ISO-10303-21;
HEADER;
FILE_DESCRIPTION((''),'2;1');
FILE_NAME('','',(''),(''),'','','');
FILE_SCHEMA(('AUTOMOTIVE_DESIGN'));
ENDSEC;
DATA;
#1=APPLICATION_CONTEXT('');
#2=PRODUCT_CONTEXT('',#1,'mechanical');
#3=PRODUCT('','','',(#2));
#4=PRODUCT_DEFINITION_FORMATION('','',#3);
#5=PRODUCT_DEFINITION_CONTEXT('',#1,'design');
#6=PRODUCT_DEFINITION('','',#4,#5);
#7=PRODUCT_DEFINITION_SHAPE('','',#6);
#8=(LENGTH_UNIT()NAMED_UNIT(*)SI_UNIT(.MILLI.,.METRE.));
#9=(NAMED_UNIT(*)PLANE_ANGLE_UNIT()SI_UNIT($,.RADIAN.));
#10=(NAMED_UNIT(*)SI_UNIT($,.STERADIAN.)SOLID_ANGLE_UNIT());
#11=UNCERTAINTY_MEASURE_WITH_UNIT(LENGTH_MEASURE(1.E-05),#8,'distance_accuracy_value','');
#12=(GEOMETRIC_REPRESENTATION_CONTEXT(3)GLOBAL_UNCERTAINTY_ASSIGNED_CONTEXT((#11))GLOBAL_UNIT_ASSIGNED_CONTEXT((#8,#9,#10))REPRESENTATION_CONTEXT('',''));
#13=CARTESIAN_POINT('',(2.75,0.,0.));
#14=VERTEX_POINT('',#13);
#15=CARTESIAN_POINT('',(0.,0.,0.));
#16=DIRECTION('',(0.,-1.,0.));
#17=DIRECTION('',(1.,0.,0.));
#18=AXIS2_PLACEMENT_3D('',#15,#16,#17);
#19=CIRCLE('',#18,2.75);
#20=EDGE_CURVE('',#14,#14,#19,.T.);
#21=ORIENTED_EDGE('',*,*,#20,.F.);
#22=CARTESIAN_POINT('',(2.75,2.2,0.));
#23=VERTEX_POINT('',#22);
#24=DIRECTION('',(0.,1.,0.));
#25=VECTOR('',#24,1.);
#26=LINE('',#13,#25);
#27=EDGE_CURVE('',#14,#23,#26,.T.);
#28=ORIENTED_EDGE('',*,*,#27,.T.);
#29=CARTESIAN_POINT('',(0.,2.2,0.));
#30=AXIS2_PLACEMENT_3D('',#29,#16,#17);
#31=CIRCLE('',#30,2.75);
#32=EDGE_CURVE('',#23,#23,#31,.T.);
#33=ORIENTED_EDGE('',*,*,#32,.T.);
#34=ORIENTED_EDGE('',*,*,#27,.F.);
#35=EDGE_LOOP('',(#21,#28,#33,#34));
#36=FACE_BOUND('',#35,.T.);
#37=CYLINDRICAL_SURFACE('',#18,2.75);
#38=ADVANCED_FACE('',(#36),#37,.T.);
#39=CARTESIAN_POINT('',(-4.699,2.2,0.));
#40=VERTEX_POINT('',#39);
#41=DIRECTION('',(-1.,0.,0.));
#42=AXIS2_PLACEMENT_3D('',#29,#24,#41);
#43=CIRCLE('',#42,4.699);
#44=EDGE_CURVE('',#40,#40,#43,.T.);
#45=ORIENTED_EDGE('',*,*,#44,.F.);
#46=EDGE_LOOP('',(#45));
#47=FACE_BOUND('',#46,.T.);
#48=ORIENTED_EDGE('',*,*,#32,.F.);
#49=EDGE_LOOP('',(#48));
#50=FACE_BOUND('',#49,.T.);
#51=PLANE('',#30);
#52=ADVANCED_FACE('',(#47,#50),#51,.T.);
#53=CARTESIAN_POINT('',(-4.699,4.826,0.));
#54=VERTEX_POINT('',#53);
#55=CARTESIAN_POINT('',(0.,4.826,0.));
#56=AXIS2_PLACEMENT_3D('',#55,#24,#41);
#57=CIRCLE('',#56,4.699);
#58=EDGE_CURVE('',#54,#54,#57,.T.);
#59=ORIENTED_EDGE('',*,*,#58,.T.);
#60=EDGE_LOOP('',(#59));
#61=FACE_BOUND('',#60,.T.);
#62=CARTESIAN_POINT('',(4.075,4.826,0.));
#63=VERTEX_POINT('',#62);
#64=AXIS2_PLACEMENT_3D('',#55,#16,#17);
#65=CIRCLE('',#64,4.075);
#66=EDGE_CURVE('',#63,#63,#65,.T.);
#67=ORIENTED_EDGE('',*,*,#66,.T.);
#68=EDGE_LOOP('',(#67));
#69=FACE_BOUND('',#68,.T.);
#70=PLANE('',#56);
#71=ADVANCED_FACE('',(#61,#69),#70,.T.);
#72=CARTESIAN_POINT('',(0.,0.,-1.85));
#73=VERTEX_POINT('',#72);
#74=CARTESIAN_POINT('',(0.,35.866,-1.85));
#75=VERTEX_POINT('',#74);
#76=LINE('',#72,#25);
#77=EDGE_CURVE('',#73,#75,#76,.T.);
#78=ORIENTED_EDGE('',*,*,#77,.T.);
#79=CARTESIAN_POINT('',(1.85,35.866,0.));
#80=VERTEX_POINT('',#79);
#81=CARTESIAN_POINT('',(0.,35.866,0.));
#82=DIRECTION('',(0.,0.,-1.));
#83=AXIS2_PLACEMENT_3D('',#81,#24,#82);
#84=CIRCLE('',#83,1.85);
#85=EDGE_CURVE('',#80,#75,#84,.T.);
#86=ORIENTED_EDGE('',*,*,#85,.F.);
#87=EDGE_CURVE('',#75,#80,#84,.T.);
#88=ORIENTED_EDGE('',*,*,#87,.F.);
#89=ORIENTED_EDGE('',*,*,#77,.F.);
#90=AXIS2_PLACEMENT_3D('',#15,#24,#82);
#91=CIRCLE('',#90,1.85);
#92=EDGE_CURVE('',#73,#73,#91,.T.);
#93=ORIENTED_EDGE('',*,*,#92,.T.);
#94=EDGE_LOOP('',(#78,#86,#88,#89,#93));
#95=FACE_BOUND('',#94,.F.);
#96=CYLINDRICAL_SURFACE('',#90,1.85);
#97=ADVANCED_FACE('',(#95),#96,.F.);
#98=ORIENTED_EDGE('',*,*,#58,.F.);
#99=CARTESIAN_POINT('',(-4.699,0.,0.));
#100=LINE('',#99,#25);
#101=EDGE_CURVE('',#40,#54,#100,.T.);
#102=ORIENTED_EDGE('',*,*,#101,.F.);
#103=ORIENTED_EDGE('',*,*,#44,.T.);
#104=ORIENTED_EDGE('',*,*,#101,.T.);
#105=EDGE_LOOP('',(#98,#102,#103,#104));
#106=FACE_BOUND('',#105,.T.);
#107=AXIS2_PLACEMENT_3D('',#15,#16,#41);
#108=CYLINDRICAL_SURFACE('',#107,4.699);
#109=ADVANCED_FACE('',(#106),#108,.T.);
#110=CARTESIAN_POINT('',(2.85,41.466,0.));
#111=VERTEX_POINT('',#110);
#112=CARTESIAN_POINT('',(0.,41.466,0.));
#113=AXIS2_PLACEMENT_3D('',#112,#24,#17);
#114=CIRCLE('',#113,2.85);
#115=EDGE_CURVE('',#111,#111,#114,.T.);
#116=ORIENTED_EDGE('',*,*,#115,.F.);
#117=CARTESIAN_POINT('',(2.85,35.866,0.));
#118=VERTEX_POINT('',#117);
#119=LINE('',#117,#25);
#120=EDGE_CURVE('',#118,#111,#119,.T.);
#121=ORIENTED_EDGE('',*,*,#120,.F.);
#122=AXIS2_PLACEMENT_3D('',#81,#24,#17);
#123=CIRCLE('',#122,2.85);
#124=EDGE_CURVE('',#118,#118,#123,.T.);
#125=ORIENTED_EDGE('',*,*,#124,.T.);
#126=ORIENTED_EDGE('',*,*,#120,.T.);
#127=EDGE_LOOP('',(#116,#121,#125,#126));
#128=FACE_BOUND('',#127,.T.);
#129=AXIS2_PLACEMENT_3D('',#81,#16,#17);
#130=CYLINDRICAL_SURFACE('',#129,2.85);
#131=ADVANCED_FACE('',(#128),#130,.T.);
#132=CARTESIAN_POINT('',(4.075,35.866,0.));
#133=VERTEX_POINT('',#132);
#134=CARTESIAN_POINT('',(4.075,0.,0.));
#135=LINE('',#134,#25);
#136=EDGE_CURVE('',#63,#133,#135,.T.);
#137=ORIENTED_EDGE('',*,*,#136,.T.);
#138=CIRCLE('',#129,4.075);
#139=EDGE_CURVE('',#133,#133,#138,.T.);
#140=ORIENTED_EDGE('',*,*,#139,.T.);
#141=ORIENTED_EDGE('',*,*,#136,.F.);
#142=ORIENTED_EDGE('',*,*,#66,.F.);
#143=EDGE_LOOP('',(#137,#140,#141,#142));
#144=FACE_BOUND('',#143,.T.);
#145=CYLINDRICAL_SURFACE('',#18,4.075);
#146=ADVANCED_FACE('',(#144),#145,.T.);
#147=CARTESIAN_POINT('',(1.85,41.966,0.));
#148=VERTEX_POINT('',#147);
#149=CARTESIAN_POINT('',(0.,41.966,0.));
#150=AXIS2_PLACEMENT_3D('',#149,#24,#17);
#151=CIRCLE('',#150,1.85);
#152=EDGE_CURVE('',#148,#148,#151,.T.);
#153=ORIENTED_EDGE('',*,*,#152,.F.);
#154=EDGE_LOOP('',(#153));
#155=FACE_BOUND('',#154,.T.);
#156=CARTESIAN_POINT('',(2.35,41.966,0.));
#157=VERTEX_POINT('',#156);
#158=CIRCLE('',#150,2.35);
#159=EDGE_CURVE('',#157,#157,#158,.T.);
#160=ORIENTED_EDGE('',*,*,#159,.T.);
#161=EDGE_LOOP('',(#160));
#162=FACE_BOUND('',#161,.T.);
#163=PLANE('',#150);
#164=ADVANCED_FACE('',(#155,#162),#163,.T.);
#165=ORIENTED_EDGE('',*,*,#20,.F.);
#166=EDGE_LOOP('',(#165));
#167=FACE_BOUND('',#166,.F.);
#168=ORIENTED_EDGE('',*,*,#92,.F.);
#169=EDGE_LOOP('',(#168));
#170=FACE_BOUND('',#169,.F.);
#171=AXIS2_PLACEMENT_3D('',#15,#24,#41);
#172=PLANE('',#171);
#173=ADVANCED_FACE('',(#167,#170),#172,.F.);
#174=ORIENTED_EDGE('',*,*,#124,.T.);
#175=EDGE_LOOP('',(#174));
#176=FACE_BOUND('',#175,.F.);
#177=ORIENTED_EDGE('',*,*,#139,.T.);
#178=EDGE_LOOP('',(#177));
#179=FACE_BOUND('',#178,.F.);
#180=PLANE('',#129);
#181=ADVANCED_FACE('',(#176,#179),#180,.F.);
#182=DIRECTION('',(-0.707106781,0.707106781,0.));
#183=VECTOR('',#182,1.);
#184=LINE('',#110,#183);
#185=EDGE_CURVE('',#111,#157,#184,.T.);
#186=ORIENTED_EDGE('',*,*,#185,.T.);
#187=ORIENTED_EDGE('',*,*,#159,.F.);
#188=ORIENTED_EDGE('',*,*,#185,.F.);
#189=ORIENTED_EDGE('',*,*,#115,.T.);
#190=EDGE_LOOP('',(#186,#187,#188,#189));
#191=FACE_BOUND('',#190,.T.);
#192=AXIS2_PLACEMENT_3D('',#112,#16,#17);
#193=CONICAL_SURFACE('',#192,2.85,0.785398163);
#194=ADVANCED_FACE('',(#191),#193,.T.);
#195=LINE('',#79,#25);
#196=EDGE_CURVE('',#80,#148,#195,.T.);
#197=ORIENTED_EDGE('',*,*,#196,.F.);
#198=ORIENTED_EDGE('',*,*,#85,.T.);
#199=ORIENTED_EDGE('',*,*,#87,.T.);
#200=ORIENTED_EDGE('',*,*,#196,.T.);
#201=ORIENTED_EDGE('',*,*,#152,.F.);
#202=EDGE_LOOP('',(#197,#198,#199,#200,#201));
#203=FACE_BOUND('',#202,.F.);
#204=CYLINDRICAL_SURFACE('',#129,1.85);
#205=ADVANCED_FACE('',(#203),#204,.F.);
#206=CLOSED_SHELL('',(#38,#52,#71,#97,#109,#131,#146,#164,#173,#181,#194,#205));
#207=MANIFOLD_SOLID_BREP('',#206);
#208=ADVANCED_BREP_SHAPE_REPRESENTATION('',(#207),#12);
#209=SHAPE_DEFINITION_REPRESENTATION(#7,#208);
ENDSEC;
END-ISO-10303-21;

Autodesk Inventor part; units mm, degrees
ref_plane "YZ Plane" through (0, 0, 0) normal (1, 0, 0) x (0, 1, 0)
ref_plane "XZ Plane" through (0, 0, 0) normal (0, 1, 0) x (-1, 0, 0)
ref_plane "XY Plane" through (0, 0, 0) normal (0, 0, 1) x (1, 0, 0)
sketch "Sketch1" plane through (0, 0, 0) normal (0, 1, 0) x (-1, 0, 0)
  circle A0 centre (0, 0) radius 4.699
  dimension "d0" = 9.398
extrude "Extrusion1" add sketch "Sketch1" along normal blind 4.826
sketch "Sketch2" plane through (0, 0, 0) normal (0, -1, 0) x (1, 0, 0)
  circle A0 centre (0, 0) radius 4.075
  dimension "d3" = 8.15
extrude "Extrusion2" add sketch "Sketch2" against normal blind 35.866
sketch "Sketch3" plane through (0, 0, 0) normal (0, -1, 0) x (1, 0, 0)
  circle A0 centre (0, 0) radius 4.699 projected
  circle A1 centre (0, 0) radius 2.75
  dimension "d18" = 5.5
extrude "Extrusion3" cut sketch "Sketch3" against normal blind 2.2
sketch "Sketch5" plane through (0, 0, 0) normal (0, -1, 0) x (1, 0, 0)
  circle A0 centre (0, 0) radius 2.75 projected
hole "Hole2" at (0, 0, 0) direction (0, 1, 0) diameter 3.7 end through all
sketch "Sketch6" plane through (0, 35.866, 0) normal (0, 1, 0) x (1, 0, 0)
  circle A0 centre (0, 0) radius 1.85 projected
  circle A1 centre (0, 0) radius 2.85
  dimension "d29" = 5.7
extrude "Extrusion4" add sketch "Sketch6" along normal blind 6.1
chamfer "Chamfer3" distance 0.5 angle 45 1 edges at (-2.85, 41.966, 0)
properties part number "Hour shaft test 7"
